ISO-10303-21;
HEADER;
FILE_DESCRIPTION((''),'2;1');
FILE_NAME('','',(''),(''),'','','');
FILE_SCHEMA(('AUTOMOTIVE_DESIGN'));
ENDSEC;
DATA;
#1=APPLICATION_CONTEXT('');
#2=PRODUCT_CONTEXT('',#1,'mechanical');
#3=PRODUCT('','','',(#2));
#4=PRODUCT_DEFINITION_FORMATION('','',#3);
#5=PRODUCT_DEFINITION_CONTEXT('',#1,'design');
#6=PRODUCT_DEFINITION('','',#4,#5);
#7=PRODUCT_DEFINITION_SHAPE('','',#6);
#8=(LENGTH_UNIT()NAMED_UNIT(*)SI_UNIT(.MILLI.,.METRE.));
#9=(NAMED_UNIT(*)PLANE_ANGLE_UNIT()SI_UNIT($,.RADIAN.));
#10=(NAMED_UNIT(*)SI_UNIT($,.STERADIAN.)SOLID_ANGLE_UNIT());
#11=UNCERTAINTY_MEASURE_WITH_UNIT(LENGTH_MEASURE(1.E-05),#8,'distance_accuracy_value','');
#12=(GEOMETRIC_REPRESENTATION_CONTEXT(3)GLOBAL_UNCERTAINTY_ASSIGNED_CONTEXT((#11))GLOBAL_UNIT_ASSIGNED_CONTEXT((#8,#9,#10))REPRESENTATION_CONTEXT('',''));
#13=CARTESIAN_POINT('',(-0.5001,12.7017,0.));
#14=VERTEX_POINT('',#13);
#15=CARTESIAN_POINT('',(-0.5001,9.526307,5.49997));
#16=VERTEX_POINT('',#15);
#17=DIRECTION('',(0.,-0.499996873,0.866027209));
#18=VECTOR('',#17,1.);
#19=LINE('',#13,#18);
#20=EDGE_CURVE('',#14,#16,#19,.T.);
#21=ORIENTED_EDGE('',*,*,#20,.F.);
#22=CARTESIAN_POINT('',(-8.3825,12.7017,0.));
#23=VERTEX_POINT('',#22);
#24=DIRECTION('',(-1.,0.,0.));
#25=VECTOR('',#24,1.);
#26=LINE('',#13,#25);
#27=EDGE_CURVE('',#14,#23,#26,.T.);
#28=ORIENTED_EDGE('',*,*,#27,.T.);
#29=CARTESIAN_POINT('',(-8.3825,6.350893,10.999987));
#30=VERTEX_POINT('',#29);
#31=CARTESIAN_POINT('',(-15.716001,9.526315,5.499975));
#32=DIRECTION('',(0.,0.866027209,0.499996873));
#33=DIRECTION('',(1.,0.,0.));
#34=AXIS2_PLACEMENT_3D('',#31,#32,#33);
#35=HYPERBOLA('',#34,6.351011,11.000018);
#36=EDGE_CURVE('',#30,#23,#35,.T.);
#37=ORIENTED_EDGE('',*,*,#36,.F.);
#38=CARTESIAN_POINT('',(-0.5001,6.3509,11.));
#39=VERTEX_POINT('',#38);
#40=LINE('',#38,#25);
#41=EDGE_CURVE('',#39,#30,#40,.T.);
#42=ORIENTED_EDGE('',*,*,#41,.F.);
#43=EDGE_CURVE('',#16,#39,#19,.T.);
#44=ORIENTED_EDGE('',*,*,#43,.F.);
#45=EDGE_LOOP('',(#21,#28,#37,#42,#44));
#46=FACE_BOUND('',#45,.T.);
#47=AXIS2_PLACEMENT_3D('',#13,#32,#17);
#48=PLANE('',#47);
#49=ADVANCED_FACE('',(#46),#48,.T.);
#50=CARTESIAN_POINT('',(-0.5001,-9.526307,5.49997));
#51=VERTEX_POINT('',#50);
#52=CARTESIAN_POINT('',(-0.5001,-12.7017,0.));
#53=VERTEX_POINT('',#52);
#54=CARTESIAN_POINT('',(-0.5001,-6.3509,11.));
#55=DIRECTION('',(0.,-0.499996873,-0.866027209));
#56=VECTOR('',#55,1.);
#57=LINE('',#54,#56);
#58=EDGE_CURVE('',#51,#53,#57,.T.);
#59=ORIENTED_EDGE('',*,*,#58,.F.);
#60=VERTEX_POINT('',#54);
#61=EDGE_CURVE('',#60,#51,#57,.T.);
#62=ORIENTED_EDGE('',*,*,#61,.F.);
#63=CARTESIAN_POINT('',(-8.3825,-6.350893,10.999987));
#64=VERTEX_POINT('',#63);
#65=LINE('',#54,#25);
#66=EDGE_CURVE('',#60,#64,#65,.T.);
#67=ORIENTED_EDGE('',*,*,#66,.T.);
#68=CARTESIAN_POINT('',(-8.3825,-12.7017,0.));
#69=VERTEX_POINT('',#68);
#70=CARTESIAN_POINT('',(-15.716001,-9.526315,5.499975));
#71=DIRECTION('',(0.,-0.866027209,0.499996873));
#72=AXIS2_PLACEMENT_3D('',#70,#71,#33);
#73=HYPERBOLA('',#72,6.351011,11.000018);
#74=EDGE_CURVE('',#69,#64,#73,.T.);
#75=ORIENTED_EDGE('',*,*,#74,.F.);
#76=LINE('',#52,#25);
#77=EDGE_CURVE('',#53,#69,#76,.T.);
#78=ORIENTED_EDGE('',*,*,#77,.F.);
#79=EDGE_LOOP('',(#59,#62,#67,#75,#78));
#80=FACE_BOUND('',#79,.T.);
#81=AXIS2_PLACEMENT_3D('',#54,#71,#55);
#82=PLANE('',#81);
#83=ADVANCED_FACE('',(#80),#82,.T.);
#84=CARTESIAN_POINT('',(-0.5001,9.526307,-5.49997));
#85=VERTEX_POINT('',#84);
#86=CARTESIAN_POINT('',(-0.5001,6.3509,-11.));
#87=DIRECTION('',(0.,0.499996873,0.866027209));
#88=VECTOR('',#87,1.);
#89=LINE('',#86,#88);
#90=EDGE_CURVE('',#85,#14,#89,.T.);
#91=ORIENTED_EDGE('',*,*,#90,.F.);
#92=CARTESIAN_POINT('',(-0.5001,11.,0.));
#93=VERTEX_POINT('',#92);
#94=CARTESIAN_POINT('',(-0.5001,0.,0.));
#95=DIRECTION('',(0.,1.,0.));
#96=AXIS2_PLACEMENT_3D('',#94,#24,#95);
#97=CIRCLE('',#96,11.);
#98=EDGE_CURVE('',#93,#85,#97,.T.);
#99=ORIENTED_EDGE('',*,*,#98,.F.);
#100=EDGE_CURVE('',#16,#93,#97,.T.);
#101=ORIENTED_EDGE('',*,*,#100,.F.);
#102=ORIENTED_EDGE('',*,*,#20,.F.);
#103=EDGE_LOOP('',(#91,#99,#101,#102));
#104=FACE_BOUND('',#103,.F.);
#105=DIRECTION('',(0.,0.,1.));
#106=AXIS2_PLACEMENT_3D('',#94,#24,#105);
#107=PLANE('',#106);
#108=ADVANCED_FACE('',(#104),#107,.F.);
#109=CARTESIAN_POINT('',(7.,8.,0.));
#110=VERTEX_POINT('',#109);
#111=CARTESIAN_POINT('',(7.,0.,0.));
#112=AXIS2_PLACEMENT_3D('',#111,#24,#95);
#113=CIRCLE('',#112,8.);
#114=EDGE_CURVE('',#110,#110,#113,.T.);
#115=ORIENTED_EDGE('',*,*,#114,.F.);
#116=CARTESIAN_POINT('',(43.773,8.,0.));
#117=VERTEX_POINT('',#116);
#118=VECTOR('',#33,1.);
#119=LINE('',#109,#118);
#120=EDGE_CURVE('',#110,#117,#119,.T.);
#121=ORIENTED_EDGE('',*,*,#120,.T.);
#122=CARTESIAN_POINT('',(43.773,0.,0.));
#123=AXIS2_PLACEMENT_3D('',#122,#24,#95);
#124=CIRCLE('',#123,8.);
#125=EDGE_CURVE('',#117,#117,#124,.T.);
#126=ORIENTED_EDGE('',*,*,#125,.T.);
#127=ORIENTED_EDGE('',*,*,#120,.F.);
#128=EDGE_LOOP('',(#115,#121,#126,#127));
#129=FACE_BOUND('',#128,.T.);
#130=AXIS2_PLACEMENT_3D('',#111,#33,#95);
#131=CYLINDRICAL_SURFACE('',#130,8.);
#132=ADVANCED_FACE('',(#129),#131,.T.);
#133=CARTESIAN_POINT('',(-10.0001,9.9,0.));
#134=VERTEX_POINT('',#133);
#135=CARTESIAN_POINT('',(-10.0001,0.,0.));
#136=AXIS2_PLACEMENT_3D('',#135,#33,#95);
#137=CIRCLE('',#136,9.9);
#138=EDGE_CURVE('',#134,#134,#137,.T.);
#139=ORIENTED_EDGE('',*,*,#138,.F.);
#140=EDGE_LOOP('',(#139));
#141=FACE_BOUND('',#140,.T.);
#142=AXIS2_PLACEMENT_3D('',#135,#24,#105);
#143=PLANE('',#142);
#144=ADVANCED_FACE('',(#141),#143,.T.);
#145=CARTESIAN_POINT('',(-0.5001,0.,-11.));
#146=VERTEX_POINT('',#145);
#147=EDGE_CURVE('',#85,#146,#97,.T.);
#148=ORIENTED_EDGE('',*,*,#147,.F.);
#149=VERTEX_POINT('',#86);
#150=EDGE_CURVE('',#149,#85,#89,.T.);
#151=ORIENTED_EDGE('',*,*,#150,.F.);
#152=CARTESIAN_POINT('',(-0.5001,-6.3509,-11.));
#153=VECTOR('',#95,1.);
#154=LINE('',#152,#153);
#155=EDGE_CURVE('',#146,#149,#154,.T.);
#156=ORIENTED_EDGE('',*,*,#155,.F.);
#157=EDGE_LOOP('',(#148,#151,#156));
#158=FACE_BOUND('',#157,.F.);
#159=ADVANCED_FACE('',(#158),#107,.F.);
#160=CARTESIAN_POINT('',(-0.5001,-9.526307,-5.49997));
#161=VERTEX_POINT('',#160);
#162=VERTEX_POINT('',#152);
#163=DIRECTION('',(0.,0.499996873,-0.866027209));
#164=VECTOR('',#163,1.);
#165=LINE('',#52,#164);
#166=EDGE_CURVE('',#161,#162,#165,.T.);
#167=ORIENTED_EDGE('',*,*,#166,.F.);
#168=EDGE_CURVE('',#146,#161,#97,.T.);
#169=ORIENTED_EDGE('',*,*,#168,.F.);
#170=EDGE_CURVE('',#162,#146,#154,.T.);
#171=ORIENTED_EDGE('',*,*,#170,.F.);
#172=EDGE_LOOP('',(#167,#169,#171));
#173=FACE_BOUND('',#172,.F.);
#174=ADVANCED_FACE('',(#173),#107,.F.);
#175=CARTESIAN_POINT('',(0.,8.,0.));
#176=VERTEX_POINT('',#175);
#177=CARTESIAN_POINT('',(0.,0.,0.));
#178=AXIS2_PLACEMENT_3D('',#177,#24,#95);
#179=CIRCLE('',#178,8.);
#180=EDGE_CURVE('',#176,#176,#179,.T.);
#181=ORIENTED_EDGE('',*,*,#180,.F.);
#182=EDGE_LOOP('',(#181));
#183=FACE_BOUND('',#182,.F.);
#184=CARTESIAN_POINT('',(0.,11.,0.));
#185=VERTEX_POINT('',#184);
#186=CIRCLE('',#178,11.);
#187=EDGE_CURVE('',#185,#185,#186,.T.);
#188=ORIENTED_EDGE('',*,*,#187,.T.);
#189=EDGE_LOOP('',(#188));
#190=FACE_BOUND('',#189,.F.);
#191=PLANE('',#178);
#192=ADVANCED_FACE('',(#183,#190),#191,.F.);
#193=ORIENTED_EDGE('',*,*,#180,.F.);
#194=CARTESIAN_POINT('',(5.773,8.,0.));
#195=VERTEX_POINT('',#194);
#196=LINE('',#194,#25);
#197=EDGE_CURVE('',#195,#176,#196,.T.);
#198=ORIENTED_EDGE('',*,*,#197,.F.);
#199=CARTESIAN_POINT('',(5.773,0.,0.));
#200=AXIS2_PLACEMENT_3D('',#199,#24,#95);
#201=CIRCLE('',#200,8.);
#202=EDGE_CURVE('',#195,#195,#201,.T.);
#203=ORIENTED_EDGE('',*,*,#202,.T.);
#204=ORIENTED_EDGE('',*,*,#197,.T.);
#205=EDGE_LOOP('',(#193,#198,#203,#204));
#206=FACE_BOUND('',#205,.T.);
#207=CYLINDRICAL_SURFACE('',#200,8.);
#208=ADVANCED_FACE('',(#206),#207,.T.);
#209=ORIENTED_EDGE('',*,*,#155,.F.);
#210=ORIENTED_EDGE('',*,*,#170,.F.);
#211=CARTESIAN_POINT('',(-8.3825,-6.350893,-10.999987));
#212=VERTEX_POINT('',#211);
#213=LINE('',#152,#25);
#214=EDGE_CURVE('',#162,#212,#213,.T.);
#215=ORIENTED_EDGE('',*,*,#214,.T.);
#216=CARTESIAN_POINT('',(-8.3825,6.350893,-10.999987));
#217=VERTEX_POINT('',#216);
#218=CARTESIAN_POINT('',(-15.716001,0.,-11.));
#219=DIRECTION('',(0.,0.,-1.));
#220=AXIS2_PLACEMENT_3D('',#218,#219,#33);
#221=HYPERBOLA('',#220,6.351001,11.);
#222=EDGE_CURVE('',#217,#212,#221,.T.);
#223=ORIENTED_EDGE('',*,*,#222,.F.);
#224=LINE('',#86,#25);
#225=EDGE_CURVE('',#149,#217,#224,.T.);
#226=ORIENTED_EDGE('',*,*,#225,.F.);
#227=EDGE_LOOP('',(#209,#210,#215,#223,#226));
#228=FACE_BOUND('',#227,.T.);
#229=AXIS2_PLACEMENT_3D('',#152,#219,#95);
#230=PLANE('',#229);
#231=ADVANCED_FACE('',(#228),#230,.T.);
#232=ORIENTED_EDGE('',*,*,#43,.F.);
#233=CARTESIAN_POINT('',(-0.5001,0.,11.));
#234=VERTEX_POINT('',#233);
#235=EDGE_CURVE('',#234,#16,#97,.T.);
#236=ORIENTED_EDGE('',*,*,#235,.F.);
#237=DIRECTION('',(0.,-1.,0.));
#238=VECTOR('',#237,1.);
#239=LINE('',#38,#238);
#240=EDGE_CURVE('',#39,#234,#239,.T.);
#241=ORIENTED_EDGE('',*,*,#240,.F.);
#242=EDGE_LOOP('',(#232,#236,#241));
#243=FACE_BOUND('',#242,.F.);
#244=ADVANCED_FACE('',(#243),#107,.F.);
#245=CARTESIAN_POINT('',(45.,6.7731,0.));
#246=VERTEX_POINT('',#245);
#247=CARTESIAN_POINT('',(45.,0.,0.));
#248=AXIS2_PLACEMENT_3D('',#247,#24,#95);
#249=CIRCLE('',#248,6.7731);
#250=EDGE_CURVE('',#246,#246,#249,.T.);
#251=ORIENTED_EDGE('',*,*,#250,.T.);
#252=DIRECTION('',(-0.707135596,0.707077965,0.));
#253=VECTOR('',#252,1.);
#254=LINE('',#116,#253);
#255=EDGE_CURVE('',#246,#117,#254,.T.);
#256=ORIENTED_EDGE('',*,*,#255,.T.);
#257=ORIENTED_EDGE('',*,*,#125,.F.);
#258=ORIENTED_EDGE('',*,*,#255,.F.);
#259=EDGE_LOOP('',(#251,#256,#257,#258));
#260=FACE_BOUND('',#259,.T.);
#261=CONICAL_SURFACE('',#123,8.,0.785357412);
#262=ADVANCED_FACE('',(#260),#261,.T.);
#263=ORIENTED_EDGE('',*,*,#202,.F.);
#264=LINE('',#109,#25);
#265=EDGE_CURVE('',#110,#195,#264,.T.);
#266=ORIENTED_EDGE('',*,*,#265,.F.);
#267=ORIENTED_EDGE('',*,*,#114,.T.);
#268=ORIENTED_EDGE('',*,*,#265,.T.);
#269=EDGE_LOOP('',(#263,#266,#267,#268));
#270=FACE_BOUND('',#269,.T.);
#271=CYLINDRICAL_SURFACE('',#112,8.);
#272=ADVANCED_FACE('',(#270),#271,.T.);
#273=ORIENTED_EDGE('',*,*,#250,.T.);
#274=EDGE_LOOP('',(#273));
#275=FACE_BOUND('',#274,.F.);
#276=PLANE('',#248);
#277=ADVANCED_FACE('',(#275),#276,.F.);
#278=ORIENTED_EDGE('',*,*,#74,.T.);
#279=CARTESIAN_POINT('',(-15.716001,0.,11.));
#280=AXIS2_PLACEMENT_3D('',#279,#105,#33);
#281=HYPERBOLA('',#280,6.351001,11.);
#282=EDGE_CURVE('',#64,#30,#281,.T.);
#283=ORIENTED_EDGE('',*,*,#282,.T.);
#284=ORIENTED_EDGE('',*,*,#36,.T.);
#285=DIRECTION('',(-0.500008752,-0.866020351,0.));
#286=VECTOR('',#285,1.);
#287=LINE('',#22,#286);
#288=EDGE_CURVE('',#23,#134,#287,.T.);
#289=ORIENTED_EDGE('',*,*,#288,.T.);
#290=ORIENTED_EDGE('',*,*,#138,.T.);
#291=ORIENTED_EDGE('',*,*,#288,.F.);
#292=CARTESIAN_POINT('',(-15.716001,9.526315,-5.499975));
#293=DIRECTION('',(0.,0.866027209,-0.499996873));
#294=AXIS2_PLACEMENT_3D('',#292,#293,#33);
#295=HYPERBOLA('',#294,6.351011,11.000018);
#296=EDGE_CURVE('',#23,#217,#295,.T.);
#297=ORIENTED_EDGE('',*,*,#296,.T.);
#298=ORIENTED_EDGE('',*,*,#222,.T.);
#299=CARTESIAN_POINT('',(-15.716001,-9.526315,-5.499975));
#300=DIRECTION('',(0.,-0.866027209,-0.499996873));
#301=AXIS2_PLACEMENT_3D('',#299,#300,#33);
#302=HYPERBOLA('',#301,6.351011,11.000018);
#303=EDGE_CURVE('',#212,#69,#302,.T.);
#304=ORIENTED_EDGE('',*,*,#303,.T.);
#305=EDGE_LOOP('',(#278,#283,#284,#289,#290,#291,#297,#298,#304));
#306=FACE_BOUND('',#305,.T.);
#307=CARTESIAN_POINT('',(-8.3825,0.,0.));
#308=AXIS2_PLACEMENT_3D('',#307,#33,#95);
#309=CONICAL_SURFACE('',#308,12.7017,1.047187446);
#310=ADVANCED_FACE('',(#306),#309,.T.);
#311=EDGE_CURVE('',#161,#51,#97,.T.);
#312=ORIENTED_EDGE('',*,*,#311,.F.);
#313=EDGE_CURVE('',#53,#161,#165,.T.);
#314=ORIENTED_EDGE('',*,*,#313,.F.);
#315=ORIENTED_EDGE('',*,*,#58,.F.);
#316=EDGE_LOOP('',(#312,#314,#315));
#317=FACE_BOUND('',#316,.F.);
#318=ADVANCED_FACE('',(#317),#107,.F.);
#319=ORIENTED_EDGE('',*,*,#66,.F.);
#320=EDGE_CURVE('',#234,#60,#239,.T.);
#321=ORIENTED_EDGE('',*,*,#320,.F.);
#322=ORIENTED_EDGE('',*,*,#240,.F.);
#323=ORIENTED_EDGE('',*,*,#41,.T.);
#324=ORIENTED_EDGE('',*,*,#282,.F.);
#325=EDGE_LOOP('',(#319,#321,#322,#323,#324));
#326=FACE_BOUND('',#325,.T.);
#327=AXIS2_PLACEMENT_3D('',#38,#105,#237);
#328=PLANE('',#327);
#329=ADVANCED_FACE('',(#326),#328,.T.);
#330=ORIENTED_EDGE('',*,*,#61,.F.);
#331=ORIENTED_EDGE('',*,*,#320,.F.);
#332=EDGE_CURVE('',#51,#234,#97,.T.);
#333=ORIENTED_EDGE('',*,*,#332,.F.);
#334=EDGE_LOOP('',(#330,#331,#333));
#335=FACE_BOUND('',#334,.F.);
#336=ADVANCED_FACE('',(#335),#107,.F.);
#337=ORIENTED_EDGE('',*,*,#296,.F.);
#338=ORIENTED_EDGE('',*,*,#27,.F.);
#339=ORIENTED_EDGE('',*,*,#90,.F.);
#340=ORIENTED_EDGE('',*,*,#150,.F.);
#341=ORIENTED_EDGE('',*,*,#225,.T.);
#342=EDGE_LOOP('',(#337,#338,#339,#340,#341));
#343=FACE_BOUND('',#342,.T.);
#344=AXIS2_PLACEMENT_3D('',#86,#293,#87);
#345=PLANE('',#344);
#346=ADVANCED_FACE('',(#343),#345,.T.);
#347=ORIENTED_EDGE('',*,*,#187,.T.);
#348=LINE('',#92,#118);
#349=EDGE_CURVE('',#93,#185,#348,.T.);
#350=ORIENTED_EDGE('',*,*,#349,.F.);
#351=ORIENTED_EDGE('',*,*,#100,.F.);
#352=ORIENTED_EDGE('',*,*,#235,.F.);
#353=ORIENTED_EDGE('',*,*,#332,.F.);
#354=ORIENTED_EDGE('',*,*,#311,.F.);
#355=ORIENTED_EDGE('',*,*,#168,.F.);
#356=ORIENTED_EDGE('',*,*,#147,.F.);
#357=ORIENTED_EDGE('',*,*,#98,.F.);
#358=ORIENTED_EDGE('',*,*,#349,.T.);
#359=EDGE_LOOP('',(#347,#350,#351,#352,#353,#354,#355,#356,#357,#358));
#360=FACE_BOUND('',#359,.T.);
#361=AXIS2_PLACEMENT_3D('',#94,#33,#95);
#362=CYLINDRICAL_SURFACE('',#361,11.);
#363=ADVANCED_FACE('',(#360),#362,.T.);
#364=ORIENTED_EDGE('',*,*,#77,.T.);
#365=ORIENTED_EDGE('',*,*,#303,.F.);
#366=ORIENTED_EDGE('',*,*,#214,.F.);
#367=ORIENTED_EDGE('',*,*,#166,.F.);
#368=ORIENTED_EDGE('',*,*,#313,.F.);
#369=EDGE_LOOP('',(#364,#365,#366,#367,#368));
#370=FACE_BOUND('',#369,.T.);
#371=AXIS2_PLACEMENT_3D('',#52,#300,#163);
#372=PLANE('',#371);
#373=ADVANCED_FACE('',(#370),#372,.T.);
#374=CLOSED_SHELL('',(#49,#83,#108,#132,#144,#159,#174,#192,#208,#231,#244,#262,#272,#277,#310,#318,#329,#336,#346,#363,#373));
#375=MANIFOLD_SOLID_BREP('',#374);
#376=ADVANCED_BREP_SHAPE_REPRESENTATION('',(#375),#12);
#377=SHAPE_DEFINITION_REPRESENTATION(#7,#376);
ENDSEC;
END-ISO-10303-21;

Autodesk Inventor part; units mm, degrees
ref_plane "YZ Plane" through (0, 0, 0) normal (1, 0, 0) x (0, 1, 0)
ref_plane "XZ Plane" through (0, 0, 0) normal (0, 1, 0) x (-1, 0, 0)
sketch "Эскиз1" plane through (0, 0, 0) normal (0, 0, 1) x (1, 0, 0)
  line L0 (0, 11) -> (0, 8)
  line L1 (7, 8) -> (45, 8)
  line L2 (45, 8) -> (45, 0)
  line L3 (45, 0) -> (-0.5001, 0)
  line L4 (-9.6001, 0) -> (54.1, 0) projected
  line L5 (-0.5001, 0) -> (-0.5001, 11)
  line L6 (-0.5001, 11) -> (0, 11)
  line L7 (7, 8) -> (5.773, 8)
  line L8 (5.773, 8) -> (0, 8)
  line L9 (0, -2.2) -> (0, 13.2) projected
  dimension "d0" = 45
  dimension "d1" = 38
  dimension "d2" = 16
  dimension "d9" = 0.5001
  dimension "d10" = 22
  dimension "d13" = 1.227
  dimension "d14" = 16
revolve "Базовый элемент" add sketch "Эскиз1" angle 360 about axis through (45, 0, 0) along (-1, 0, 0)
sketch "Эскиз2" plane through (-0.5001, 0, 0) normal (-1, 0, 0) x (0, 0, 1)
  line L0 (0, 12.7017) -> (11, 6.3509)
  line L1 (11, 6.3509) -> (11, -6.3509)
  line L2 (11, -6.3509) -> (0, -12.7017)
  line L3 (0, -12.7017) -> (-11, -6.3509)
  line L4 (-11, -6.3509) -> (-11, 6.3509)
  line L5 (-11, 6.3509) -> (0, 12.7017)
  point P0 (0, 0)
  point P1 (0, 0)
  dimension "d11" = 22
extrude "С головкой" add sketch "Эскиз2" along normal blind 9.5
sketch "Эскиз4" plane through (0, 0, 0) normal (0, 0, 1) x (1, 0, 0)
  line L0 (-10.0001, 9.9) -> (-10.0001, 12.7017)
  line L1 (-10.0001, 12.7017) -> (-8.3825, 12.7017)
  line L2 (-8.3825, 12.7017) -> (-10.0001, 9.9)
  line L3 (-11.9001, 0) -> (1.3999, 0) projected
  line L4 (-0.5001, 12.7017) -> (-10.0001, 12.7017) projected
  line L5 (-10.0001, 6.3509) -> (-10.0001, 12.7017) projected
  dimension "d5" = 30
  dimension "d19" = 19.8
revolve "Фаска1" cut sketch "Эскиз4" angle 360 about axis through (-10, 0, 0) along (1, 0, 0)
thread "Резьба" size "M16x2" class "6g" standard "ISO Metric profile" length 38
chamfer "Фаска2" distance 1.2269 distance2 1.227 1 edges at (45, -8, 0) measured on face at (45, -1.996, 1.7683)
ref_plane "Work Plane1" through (1.525, 0, 0) normal (0, 0, 1) x (1, 0, 0)
equation "\"d0\" = NLG"
equation "\"d1\" = GEL"
equation "\"d2\" = GD"
equation "\"d10\" = SD2"
equation "\"d14\" = BDM"
equation "\"d11\" = SW"
equation "\"d3\" = KOH - SD"
equation "\"d5\" = ANG1"
equation "\"d19\" = SW0"
equation "\"d15\" = GEL"
equation "\"d6\" = -0.5 * SPD + 0.5 * GD"
equation "\"NLG\" = 45"
equation "\"GD\" = NND"
equation "\"BDM\" = NND"
equation "\"KOH\" = 10"
equation "\"GEL\" = 38"
equation "\"SW\" = 22"
equation "\"SW0\" = 19.8"
equation "\"SPD\" = NND - 1.2269 * PTC"
equation "\"SD2\" = SW"
equation "\"SD\" = 0.5"
equation "\"ANG1\" = 30deg"
equation "\"GAL\" = 0.61345 * PTC"
equation "\"GUL\" = 0.61345 * PTC"
equation "\"RR\" = 0.1"
equation "\"GD1\" = THREADDIA - 1.2269 * PTC"
equation "\"THREADDIA\" = 16"
equation "\"TOA\" = 30deg"
equation "\"PTC\" = 2"
equation "\"NND\" = 16"
equation "\"E0\" = 1.155 * SW"
properties part number "Болт M16-6gx45 ГОСТ 7808-70" material "Сталь, мягкая"
